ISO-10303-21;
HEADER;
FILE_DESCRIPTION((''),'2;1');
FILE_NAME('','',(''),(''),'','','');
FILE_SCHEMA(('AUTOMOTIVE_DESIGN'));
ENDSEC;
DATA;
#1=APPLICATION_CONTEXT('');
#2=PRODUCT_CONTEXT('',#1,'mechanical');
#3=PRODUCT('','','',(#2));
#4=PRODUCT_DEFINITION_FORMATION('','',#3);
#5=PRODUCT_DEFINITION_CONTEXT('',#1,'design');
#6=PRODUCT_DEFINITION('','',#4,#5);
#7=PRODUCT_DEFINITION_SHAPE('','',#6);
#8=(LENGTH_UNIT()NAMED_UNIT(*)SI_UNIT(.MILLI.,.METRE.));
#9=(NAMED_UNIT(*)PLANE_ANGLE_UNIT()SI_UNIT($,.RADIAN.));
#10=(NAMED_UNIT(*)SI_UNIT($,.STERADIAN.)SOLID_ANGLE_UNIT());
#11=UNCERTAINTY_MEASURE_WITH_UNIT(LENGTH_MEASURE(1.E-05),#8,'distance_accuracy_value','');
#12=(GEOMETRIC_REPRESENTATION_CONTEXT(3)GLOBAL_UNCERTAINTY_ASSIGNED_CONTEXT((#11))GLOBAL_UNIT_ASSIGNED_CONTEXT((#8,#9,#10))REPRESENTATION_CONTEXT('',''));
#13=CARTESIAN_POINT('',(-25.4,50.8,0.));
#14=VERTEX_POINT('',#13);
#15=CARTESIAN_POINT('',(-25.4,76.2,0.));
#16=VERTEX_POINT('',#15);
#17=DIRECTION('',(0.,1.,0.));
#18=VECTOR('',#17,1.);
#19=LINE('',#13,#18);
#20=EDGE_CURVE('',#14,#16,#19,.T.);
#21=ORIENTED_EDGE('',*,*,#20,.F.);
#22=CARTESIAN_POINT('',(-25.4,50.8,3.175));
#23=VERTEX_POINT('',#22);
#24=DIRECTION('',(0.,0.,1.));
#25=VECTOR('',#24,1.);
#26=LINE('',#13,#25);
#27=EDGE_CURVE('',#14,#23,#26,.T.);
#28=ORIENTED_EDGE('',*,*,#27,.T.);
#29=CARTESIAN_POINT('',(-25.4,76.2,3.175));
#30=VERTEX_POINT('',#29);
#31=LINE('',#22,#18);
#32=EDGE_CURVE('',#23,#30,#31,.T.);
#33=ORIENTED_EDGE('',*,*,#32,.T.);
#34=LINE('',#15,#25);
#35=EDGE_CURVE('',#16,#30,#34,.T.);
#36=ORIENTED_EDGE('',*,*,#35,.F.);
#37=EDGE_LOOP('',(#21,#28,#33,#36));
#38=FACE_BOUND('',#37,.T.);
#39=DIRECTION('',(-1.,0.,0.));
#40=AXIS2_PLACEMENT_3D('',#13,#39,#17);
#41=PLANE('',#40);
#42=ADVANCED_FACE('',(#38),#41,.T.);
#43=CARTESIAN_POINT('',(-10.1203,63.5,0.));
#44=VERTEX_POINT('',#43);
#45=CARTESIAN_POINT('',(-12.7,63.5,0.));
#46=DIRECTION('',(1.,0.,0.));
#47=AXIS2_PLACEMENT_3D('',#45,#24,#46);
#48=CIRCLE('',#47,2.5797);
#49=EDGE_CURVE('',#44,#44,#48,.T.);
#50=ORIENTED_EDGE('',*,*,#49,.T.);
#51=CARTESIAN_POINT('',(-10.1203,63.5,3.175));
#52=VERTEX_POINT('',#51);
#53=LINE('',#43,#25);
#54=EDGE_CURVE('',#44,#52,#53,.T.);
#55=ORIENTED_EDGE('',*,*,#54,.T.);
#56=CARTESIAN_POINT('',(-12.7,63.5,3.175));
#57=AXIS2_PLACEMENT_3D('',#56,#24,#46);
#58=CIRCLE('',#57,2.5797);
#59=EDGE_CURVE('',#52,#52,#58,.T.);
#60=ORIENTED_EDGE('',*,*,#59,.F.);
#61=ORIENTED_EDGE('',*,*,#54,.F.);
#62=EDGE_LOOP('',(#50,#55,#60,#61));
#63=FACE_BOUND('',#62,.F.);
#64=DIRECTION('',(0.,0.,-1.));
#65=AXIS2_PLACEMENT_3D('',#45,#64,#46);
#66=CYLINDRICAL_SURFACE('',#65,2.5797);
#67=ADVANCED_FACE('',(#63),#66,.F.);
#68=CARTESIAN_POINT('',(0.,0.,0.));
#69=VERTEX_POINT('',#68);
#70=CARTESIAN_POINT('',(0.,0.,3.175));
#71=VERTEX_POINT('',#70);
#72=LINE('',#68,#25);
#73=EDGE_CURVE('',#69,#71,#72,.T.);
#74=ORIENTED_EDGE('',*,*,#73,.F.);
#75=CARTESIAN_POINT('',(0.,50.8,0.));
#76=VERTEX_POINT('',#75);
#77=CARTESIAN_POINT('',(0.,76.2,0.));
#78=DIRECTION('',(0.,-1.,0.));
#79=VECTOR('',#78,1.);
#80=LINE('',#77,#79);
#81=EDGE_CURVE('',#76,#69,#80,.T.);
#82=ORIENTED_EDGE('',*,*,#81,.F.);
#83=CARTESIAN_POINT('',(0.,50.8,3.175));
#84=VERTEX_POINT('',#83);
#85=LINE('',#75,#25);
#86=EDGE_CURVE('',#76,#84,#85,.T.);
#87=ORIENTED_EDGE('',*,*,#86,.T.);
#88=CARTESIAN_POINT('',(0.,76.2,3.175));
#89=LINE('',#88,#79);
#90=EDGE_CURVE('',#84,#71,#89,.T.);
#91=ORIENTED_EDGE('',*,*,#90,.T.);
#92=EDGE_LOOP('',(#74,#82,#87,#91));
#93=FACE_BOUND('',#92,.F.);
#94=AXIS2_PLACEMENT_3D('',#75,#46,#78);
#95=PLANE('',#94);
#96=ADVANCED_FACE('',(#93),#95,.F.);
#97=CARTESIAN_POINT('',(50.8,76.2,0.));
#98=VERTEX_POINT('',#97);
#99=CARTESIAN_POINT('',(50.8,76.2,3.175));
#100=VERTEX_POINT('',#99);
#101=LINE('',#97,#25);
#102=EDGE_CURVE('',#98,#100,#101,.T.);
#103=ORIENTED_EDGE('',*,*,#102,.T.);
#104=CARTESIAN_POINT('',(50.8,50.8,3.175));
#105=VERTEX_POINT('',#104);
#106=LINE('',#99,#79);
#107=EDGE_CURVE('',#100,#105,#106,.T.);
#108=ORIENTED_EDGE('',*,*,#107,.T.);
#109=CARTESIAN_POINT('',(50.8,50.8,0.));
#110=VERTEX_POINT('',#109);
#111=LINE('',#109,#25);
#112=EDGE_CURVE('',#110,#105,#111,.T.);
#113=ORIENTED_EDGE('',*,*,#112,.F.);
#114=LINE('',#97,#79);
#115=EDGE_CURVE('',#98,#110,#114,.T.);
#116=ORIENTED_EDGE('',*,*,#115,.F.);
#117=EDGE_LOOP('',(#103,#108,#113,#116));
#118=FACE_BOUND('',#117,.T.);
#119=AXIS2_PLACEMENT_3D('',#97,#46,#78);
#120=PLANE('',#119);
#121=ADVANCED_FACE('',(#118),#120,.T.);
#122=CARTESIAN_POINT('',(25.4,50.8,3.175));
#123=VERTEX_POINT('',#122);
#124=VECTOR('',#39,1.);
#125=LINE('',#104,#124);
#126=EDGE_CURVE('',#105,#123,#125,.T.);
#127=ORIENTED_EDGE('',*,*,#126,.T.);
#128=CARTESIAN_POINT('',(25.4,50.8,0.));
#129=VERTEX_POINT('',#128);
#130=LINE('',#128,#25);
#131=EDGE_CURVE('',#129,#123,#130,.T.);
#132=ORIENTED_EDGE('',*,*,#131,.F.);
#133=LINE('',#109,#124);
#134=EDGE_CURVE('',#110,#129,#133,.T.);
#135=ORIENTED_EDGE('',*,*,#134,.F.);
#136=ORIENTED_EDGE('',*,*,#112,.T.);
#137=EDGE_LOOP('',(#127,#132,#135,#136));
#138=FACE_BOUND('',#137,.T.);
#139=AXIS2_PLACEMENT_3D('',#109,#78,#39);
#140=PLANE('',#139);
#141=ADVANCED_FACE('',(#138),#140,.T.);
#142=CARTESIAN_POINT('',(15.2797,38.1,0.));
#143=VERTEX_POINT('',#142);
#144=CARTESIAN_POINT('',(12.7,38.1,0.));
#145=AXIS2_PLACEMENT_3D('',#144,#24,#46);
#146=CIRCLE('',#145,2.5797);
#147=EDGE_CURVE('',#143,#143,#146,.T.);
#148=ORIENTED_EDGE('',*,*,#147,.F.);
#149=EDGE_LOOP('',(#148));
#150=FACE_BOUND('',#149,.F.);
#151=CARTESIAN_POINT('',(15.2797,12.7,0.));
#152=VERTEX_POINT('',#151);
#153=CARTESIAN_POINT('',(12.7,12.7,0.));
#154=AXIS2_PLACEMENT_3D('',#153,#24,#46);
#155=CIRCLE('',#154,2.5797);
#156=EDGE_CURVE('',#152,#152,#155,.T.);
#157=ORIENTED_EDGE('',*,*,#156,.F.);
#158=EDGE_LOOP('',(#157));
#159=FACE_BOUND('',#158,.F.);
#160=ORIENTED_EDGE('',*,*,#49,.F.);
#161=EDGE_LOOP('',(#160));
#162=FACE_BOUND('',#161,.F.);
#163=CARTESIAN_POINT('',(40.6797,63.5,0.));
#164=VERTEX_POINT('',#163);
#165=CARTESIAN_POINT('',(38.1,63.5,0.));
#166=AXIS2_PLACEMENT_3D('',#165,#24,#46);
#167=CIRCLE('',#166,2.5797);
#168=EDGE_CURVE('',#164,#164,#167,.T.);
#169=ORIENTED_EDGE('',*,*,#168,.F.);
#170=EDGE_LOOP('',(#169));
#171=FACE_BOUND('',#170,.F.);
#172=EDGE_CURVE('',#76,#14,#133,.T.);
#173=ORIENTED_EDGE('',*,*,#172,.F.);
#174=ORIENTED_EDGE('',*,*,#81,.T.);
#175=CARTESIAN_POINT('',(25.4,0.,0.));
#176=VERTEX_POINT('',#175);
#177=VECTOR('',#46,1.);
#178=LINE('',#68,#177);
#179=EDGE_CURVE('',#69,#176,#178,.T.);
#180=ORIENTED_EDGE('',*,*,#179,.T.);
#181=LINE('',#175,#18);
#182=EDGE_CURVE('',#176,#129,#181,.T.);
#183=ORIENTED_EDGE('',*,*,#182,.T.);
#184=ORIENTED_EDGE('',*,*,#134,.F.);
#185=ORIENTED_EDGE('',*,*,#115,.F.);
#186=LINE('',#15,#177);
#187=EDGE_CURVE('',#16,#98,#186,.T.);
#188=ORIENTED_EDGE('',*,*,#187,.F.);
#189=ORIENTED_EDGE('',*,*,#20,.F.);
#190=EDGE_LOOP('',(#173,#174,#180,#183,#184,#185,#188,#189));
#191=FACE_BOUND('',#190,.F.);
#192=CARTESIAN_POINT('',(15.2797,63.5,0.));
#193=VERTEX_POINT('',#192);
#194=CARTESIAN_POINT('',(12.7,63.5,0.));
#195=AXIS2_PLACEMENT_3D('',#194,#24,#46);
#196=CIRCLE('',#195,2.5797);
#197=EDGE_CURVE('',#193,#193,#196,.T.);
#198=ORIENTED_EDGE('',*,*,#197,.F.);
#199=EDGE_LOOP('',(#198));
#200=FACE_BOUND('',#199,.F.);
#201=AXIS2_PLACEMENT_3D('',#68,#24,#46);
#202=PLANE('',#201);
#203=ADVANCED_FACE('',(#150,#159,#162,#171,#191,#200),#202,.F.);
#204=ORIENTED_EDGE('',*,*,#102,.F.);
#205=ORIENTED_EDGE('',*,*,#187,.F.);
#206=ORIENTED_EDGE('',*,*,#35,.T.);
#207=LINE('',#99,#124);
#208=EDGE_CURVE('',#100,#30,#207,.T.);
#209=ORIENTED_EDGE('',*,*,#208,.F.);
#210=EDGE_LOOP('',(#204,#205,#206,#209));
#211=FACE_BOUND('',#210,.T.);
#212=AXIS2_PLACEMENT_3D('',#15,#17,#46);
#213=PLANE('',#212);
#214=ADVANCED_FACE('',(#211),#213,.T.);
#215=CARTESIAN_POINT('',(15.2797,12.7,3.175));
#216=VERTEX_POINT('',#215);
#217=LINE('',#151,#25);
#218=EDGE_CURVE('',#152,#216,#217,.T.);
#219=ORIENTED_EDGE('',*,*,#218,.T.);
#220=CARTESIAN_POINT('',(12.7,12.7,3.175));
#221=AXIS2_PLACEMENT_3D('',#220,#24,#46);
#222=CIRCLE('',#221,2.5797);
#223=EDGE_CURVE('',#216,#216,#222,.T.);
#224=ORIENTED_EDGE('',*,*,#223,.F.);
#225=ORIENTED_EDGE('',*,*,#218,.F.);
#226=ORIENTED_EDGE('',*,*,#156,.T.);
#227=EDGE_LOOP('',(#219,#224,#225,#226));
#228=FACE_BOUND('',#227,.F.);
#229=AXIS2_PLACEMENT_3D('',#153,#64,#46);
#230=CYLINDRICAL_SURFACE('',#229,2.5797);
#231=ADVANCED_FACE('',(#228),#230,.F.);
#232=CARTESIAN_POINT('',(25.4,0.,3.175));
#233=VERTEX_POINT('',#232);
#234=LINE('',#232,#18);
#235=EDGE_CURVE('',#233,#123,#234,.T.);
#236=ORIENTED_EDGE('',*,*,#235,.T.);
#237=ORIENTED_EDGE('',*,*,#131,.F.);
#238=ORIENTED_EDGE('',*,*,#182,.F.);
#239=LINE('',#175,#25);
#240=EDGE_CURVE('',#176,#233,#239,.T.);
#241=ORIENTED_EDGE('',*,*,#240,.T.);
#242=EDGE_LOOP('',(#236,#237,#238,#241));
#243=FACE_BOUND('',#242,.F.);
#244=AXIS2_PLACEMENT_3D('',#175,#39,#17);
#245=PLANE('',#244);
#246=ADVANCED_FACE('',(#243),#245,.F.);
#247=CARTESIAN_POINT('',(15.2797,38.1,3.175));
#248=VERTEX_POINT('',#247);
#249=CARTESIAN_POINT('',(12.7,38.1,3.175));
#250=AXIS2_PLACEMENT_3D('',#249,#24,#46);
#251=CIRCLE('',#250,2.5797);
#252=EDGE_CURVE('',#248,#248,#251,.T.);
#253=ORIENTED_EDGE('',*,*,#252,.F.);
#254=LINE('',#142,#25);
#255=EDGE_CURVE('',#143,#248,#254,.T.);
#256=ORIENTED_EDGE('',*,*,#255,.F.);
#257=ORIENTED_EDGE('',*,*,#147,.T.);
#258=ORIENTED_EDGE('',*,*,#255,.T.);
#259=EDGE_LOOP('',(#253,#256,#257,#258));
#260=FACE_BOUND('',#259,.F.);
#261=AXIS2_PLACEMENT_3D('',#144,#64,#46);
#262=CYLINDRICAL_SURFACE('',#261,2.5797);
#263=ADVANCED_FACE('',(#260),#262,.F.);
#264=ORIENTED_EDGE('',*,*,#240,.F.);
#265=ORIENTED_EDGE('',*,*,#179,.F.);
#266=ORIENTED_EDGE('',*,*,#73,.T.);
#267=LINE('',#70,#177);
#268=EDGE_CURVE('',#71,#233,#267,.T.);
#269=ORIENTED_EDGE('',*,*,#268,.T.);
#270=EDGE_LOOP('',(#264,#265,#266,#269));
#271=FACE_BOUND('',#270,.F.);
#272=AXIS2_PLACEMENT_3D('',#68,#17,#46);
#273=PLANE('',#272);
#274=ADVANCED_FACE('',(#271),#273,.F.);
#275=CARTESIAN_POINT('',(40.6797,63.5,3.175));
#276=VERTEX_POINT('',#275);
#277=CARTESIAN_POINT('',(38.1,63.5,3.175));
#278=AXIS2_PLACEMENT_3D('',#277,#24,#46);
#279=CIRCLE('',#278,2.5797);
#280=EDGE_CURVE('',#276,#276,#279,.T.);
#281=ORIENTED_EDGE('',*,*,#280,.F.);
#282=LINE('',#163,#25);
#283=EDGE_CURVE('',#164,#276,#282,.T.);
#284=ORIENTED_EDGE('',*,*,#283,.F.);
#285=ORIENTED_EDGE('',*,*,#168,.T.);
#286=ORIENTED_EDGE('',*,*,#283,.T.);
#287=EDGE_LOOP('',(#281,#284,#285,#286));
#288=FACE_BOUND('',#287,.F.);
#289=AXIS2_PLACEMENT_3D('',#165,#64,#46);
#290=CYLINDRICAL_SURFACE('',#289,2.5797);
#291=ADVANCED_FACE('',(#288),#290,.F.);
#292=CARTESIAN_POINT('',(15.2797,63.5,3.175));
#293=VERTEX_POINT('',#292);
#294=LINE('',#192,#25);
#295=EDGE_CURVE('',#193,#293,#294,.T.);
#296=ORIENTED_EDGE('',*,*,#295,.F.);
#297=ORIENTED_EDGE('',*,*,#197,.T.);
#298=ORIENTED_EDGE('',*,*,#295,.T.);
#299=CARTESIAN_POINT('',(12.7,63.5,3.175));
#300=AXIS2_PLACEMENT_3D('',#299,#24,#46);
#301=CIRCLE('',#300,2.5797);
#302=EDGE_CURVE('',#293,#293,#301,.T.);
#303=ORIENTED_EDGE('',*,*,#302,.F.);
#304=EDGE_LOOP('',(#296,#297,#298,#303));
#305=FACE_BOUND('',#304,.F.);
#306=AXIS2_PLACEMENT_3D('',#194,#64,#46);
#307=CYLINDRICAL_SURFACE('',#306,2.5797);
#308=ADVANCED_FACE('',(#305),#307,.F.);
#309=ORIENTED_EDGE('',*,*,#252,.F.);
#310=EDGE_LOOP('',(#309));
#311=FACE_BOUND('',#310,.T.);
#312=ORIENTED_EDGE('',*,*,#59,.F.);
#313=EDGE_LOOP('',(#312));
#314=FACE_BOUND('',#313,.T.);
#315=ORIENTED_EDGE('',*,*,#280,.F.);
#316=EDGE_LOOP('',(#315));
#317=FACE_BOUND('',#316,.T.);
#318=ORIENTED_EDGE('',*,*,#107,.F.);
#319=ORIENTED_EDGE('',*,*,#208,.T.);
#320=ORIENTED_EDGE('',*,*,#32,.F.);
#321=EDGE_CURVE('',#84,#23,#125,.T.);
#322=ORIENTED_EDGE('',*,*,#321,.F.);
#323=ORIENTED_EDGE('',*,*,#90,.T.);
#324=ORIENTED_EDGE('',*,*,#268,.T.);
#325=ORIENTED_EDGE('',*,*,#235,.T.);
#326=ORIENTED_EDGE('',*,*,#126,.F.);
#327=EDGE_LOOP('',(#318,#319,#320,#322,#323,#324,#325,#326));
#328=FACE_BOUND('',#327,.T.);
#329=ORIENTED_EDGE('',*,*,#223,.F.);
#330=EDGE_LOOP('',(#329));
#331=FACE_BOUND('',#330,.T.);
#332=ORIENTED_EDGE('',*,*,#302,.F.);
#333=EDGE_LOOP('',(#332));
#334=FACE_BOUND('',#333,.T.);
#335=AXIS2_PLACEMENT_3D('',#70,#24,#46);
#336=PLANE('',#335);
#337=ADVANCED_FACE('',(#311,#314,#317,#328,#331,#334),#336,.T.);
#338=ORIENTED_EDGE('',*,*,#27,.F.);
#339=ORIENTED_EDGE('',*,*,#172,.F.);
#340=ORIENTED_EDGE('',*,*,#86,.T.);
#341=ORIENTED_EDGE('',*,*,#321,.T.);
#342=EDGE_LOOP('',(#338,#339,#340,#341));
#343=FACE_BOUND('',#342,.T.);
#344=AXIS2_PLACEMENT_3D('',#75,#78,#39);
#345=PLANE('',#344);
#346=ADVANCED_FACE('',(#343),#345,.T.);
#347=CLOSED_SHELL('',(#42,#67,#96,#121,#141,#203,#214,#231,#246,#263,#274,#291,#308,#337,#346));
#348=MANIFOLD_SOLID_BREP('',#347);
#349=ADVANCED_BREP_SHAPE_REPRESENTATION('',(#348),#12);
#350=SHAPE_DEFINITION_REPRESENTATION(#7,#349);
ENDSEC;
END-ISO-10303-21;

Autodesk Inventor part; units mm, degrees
ref_plane "YZ Plane" through (0, 0, 0) normal (1, 0, 0) x (0, 1, 0)
ref_plane "XZ Plane" through (0, 0, 0) normal (0, 1, 0) x (-1, 0, 0)
ref_plane "XY Plane" through (0, 0, 0) normal (0, 0, 1) x (1, 0, 0)
sketch "Sketch1" plane through (0, 0, 0) normal (0, 0, 1) x (1, 0, 0)
  line L0 (0, 0) -> (25.4, 0)
  line L1 (25.4, 0) -> (25.4, 76.2)
  line L2 (25.4, 76.2) -> (0, 76.2)
  line L3 (0, 76.2) -> (0, 0)
  line L4 (-25.4, 76.2) -> (50.8, 76.2)
  line L5 (50.8, 76.2) -> (50.8, 50.8)
  line L6 (50.8, 50.8) -> (-25.4, 50.8)
  line L7 (-25.4, 50.8) -> (-25.4, 76.2)
  line L8 (12.7, 76.2) -> (12.7, 63.5) construction
  circle A0 centre (12.7, 63.5) radius 2.5797
  line L9 (12.7, 63.5) -> (-12.7, 63.5) construction
  line L10 (12.7, 63.5) -> (38.1, 63.5) construction
  line L11 (12.7, 63.5) -> (12.7, 38.1) construction
  line L12 (12.7, 38.1) -> (12.7, 12.7) construction
  circle A1 centre (-12.7, 63.5) radius 2.5797
  circle A2 centre (38.1, 63.5) radius 2.5797
  circle A3 centre (12.7, 38.1) radius 2.5797
  circle A4 centre (12.7, 12.7) radius 2.5797
  dimension "d0" = 25.4
  dimension "d1" = 76.2
  dimension "d2" = 76.2
  dimension "d3" = 25.4
  dimension "d4" = 5.1594
  dimension "d5" = 25.4
  dimension "d6" = 25.4
  dimension "d7" = 25.4
  dimension "d8" = 25.4
  dimension "d11" = 5.1594
  dimension "d12" = 5.1594
  dimension "d13" = 5.1594
  dimension "d14" = 5.1594
extrude "Extrusion1" add sketch "Sketch1" along normal blind 3.175
properties part number "T-Gusset"
